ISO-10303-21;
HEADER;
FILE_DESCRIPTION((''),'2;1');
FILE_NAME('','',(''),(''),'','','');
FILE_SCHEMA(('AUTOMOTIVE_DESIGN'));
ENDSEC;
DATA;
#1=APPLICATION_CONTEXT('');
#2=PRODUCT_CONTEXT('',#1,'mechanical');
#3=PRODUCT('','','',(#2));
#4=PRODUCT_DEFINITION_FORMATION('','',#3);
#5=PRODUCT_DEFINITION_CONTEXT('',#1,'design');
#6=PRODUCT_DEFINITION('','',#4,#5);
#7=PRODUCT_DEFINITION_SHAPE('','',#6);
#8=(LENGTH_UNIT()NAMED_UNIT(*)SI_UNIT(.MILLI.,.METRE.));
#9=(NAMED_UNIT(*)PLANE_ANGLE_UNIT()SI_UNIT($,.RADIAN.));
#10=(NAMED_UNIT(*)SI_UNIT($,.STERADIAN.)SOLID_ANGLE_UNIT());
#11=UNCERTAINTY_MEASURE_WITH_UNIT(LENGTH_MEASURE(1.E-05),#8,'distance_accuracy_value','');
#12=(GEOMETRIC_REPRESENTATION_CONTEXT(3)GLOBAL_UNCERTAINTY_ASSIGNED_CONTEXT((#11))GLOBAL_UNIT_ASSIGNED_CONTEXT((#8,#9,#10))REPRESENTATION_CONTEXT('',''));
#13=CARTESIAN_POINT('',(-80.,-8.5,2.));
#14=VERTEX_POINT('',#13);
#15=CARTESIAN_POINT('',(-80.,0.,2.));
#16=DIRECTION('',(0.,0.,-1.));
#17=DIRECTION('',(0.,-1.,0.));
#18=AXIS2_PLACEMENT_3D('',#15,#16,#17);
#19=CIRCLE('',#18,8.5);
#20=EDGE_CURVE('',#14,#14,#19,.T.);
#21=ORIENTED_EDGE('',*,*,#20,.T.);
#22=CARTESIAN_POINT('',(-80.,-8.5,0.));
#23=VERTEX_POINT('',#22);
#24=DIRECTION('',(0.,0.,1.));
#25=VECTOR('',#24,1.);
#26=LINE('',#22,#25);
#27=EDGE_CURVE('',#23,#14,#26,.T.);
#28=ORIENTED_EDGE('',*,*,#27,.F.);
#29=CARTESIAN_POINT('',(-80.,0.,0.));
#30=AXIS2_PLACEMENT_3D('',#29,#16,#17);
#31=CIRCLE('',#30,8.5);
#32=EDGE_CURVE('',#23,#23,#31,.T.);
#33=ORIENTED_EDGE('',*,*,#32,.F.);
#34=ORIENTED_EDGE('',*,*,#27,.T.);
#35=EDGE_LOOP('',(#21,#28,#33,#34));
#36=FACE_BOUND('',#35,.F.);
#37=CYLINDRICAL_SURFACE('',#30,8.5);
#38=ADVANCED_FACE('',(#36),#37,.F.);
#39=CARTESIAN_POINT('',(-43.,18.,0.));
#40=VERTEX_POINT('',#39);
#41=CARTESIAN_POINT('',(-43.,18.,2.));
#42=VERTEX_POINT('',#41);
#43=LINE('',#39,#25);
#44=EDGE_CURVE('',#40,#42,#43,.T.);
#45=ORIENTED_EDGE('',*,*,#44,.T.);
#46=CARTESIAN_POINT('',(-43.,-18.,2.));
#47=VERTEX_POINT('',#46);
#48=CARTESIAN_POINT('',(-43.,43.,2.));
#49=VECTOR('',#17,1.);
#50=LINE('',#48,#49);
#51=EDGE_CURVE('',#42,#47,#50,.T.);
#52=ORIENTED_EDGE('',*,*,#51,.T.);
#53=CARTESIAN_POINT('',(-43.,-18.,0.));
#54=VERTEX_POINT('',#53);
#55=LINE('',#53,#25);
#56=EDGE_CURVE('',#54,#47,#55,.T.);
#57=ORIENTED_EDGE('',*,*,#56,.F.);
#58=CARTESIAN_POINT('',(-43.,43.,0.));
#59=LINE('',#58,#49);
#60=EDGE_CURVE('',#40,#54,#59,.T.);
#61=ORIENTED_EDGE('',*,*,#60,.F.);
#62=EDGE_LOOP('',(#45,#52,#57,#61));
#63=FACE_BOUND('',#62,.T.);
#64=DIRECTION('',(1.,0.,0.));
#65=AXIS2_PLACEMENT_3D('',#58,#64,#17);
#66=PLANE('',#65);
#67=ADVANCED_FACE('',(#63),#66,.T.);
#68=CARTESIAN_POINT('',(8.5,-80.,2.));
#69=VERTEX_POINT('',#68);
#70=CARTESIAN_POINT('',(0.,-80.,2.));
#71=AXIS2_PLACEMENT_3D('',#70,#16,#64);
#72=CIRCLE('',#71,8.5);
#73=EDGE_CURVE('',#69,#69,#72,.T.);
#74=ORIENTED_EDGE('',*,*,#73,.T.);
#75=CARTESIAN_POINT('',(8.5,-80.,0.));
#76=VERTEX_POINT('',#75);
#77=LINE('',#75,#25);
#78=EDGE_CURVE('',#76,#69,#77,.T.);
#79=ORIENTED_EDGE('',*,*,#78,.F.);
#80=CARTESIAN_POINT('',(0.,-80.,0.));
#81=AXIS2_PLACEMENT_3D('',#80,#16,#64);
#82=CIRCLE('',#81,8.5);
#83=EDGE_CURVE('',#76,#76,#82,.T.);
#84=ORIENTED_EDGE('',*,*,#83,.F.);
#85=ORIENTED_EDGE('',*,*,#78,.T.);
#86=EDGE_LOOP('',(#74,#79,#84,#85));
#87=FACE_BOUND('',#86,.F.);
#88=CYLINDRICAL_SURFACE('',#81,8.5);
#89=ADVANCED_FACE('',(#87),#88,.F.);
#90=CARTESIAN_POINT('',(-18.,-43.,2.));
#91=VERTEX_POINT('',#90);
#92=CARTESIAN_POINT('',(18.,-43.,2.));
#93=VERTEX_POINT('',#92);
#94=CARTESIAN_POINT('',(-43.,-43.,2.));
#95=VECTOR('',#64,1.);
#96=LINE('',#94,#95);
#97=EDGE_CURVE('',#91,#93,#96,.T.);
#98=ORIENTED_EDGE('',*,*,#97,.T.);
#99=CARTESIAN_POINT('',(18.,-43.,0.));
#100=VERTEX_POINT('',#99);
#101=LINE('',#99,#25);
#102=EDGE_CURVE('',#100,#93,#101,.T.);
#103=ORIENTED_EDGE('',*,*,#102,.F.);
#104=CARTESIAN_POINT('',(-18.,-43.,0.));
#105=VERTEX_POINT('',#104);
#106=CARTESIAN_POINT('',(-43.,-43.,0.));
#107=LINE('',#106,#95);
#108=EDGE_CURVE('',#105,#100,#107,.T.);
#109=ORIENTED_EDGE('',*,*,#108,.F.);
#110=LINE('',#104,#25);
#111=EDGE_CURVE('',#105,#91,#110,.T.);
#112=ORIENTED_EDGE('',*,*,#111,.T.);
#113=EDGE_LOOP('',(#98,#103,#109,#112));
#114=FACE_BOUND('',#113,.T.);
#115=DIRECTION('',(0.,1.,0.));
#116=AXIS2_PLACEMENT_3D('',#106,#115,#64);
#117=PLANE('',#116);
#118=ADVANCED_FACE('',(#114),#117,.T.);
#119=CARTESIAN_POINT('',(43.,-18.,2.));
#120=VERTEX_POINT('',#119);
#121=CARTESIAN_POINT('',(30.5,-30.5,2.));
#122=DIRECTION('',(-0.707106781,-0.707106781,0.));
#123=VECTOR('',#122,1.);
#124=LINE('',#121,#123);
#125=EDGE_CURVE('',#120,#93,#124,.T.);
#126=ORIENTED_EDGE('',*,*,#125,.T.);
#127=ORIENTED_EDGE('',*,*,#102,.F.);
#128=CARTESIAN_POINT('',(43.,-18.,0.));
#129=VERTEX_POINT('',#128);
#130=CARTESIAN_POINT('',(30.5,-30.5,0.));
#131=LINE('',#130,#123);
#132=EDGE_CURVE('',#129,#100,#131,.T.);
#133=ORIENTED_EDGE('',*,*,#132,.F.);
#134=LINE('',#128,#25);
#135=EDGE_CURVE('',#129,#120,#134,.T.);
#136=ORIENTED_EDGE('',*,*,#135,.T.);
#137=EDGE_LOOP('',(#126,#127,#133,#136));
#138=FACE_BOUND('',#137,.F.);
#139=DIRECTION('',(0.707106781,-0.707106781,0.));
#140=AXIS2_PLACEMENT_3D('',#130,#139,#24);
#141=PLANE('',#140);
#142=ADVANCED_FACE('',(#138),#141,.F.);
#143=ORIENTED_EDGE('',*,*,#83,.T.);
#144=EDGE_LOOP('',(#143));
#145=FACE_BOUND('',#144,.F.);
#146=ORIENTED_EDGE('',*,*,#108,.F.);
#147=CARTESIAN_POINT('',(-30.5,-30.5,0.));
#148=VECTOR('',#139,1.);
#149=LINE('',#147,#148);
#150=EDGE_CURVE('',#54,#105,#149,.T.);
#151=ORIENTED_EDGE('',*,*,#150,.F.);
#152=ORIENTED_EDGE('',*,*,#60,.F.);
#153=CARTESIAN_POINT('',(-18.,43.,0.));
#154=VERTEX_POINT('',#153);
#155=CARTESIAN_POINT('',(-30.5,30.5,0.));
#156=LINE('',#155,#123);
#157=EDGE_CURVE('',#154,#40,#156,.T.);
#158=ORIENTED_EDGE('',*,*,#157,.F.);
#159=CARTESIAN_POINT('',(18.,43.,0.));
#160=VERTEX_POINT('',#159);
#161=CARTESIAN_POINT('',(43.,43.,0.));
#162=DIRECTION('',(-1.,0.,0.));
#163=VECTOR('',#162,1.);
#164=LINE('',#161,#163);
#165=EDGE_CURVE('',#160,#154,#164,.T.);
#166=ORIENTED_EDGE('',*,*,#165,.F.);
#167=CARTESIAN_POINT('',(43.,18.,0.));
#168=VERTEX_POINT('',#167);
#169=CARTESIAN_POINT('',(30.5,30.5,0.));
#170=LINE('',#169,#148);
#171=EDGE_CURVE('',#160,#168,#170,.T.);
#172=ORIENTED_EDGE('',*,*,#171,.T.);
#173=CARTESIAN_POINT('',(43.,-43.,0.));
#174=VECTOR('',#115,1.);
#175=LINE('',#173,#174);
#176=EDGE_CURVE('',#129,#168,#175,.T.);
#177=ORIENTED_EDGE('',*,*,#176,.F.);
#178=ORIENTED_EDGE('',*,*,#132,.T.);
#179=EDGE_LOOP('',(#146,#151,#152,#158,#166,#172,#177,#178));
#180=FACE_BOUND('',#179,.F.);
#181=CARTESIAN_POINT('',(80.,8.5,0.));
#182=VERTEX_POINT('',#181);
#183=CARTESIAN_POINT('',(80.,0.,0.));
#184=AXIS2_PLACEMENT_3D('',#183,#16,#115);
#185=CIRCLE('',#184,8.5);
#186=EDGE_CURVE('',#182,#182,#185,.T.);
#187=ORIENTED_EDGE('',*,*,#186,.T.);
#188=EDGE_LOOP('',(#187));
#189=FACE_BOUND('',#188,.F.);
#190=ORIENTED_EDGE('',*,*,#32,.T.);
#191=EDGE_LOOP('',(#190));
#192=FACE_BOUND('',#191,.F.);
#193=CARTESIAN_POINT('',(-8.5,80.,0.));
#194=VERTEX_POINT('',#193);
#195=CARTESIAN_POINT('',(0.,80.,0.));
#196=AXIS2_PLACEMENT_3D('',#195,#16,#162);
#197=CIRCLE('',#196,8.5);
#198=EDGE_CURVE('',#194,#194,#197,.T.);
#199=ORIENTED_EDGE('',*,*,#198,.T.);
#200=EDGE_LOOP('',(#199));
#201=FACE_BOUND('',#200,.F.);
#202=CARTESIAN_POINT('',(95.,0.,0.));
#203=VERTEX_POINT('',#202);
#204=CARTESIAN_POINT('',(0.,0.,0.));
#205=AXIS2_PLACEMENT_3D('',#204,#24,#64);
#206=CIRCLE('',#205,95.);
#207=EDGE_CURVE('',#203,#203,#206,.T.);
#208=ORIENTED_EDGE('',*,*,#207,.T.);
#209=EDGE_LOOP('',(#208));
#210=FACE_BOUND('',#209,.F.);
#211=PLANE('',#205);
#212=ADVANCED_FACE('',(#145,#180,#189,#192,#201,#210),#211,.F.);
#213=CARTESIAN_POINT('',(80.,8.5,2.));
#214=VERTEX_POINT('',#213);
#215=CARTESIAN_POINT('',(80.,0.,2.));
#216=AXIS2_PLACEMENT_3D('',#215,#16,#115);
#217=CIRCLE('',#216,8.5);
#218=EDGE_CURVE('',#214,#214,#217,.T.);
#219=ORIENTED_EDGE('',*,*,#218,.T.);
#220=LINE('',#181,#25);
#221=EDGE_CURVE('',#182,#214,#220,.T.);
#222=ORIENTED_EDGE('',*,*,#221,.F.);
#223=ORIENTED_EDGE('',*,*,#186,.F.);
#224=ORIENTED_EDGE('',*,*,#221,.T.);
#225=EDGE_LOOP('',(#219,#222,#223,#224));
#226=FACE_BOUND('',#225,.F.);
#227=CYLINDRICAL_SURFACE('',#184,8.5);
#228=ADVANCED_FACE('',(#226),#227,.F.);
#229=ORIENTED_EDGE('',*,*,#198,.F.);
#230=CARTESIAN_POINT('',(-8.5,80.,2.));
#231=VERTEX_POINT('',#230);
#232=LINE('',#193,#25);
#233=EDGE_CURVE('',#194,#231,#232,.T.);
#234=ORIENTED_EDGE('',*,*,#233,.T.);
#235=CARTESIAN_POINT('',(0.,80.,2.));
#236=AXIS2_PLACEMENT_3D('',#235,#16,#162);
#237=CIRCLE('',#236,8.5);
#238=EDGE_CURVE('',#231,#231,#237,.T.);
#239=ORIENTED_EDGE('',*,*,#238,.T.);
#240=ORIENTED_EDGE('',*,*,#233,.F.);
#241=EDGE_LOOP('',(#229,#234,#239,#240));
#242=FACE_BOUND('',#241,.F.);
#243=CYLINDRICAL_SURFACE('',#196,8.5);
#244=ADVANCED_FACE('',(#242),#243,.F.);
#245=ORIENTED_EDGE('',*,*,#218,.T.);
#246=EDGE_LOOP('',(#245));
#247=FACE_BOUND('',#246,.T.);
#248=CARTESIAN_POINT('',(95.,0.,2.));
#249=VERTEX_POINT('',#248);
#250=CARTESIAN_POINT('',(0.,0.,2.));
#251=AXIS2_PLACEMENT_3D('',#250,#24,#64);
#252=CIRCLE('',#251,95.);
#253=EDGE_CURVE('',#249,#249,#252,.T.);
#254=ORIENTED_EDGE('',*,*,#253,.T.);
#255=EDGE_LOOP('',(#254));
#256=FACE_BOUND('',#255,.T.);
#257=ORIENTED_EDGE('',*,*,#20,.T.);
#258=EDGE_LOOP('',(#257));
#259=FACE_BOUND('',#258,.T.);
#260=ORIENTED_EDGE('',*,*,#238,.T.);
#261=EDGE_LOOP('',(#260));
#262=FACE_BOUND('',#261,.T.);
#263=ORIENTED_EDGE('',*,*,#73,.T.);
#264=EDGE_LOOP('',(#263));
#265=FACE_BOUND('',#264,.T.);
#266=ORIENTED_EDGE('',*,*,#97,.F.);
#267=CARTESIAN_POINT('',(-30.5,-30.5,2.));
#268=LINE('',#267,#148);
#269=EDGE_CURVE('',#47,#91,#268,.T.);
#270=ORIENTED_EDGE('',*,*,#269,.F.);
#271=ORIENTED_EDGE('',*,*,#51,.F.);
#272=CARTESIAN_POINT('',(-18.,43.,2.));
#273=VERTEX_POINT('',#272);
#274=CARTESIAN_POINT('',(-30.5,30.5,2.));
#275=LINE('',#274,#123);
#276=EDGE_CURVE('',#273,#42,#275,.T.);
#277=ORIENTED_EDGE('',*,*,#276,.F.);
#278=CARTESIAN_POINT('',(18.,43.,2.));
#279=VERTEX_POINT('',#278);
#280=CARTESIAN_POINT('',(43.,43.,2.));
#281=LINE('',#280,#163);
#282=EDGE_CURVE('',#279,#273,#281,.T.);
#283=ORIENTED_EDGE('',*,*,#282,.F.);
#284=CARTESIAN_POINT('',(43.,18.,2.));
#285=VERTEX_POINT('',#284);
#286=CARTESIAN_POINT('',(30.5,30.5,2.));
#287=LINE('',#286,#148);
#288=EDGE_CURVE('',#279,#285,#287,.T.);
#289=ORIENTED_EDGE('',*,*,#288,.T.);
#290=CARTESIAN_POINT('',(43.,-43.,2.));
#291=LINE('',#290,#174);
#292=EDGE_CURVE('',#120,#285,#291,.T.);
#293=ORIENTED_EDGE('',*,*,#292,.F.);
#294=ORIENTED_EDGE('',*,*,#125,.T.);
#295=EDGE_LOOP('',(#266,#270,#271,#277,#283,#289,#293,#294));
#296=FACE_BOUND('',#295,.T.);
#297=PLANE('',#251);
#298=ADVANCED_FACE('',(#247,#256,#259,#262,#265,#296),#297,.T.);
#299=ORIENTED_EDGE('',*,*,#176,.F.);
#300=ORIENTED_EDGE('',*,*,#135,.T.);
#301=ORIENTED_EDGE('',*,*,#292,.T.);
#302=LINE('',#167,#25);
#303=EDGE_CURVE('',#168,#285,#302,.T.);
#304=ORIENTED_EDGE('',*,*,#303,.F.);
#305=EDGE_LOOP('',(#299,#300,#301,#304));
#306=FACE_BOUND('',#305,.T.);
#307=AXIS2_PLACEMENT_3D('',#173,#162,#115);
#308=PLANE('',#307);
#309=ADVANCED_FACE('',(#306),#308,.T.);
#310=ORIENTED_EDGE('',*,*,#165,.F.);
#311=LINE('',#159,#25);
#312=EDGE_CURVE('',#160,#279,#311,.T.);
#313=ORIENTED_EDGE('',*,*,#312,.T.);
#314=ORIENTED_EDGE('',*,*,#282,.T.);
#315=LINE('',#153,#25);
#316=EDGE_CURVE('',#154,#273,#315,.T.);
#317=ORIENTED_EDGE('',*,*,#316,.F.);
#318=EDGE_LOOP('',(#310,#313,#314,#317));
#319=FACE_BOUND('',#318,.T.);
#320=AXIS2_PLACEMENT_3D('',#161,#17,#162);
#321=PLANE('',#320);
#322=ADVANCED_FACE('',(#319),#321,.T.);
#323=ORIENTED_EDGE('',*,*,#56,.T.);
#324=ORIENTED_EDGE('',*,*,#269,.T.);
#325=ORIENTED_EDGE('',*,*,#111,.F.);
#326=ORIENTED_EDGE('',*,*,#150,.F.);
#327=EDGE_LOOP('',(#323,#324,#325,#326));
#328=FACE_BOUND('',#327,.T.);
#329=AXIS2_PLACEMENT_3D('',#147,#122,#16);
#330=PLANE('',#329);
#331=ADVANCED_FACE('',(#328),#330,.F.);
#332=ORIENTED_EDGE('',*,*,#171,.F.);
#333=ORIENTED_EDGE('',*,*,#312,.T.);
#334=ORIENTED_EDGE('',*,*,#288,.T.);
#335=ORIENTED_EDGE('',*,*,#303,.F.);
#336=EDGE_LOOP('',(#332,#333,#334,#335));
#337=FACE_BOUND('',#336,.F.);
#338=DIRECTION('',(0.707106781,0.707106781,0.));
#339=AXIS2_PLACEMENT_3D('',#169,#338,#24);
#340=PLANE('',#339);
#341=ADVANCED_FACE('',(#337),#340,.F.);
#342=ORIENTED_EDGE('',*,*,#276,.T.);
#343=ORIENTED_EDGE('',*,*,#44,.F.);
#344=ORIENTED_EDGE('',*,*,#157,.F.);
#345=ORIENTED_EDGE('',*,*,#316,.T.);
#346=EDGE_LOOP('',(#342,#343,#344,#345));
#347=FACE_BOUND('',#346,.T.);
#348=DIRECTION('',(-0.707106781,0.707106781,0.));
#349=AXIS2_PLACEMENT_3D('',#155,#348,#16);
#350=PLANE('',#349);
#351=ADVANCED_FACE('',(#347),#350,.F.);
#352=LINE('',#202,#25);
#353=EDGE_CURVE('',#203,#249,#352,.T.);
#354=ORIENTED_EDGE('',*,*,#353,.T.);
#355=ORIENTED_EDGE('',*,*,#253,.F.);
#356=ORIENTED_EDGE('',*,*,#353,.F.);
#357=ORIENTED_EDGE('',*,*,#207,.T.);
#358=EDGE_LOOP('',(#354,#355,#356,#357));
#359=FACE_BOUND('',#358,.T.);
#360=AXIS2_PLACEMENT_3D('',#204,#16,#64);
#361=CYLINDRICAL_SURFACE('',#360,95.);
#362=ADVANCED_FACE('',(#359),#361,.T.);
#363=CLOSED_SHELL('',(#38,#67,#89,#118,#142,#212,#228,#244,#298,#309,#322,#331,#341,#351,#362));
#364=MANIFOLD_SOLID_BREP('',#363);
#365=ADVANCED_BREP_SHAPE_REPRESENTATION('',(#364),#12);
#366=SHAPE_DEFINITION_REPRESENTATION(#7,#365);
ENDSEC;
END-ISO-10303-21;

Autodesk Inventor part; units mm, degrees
ref_plane "YZ Plane" through (0, 0, 0) normal (1, 0, 0) x (0, 1, 0)
ref_plane "XZ Plane" through (0, 0, 0) normal (0, 1, 0) x (-1, 0, 0)
ref_plane "XY Plane" through (0, 0, 0) normal (0, 0, 1) x (1, 0, 0)
sketch "Sketch1" plane through (0, 0, 0) normal (0, 0, 1) x (1, 0, 0)
  circle A0 centre (0, 0) radius 95
  line L0 (43, 43) -> (-43, 43)
  line L1 (-43, 43) -> (-43, -43)
  line L2 (-43, -43) -> (43, -43)
  line L3 (43, -43) -> (43, 43)
  line L4 (43, 43) -> (-43, -43) construction
  line L5 (-43, 43) -> (43, -43) construction
  dimension "d157" = 190
  dimension "d158" = 86
  dimension "d159" = 86
extrude "Plate5" add sketch "Sketch1" along normal blind 2
sketch "Sketch7" plane through (0, 0, 0) normal (0, 0, -1) x (-1, 0, 0)
  circle A0 centre (0, 80) radius 8.5
  point P0 (0, 0)
  dimension "d160" = 17
  dimension "d161" = 80
extrude "Cut1" cut sketch "Sketch7" against normal blind 2
pattern_circular "Circular Pattern1" count 4 over 360 about axis through (0, 0, -10) along (0, 0, 1) of "Cut1"
chamfer "Corner Chamfer2" distance 25 angle 45 4 edges at (-43, -43, 1) (43, -43, 1) (-43, 43, 1) (43, 43, 1)
properties part number "PNS 1792  funnel FLANGE 1200 50-90_1000x90_1200" material "Stainless Steel"
